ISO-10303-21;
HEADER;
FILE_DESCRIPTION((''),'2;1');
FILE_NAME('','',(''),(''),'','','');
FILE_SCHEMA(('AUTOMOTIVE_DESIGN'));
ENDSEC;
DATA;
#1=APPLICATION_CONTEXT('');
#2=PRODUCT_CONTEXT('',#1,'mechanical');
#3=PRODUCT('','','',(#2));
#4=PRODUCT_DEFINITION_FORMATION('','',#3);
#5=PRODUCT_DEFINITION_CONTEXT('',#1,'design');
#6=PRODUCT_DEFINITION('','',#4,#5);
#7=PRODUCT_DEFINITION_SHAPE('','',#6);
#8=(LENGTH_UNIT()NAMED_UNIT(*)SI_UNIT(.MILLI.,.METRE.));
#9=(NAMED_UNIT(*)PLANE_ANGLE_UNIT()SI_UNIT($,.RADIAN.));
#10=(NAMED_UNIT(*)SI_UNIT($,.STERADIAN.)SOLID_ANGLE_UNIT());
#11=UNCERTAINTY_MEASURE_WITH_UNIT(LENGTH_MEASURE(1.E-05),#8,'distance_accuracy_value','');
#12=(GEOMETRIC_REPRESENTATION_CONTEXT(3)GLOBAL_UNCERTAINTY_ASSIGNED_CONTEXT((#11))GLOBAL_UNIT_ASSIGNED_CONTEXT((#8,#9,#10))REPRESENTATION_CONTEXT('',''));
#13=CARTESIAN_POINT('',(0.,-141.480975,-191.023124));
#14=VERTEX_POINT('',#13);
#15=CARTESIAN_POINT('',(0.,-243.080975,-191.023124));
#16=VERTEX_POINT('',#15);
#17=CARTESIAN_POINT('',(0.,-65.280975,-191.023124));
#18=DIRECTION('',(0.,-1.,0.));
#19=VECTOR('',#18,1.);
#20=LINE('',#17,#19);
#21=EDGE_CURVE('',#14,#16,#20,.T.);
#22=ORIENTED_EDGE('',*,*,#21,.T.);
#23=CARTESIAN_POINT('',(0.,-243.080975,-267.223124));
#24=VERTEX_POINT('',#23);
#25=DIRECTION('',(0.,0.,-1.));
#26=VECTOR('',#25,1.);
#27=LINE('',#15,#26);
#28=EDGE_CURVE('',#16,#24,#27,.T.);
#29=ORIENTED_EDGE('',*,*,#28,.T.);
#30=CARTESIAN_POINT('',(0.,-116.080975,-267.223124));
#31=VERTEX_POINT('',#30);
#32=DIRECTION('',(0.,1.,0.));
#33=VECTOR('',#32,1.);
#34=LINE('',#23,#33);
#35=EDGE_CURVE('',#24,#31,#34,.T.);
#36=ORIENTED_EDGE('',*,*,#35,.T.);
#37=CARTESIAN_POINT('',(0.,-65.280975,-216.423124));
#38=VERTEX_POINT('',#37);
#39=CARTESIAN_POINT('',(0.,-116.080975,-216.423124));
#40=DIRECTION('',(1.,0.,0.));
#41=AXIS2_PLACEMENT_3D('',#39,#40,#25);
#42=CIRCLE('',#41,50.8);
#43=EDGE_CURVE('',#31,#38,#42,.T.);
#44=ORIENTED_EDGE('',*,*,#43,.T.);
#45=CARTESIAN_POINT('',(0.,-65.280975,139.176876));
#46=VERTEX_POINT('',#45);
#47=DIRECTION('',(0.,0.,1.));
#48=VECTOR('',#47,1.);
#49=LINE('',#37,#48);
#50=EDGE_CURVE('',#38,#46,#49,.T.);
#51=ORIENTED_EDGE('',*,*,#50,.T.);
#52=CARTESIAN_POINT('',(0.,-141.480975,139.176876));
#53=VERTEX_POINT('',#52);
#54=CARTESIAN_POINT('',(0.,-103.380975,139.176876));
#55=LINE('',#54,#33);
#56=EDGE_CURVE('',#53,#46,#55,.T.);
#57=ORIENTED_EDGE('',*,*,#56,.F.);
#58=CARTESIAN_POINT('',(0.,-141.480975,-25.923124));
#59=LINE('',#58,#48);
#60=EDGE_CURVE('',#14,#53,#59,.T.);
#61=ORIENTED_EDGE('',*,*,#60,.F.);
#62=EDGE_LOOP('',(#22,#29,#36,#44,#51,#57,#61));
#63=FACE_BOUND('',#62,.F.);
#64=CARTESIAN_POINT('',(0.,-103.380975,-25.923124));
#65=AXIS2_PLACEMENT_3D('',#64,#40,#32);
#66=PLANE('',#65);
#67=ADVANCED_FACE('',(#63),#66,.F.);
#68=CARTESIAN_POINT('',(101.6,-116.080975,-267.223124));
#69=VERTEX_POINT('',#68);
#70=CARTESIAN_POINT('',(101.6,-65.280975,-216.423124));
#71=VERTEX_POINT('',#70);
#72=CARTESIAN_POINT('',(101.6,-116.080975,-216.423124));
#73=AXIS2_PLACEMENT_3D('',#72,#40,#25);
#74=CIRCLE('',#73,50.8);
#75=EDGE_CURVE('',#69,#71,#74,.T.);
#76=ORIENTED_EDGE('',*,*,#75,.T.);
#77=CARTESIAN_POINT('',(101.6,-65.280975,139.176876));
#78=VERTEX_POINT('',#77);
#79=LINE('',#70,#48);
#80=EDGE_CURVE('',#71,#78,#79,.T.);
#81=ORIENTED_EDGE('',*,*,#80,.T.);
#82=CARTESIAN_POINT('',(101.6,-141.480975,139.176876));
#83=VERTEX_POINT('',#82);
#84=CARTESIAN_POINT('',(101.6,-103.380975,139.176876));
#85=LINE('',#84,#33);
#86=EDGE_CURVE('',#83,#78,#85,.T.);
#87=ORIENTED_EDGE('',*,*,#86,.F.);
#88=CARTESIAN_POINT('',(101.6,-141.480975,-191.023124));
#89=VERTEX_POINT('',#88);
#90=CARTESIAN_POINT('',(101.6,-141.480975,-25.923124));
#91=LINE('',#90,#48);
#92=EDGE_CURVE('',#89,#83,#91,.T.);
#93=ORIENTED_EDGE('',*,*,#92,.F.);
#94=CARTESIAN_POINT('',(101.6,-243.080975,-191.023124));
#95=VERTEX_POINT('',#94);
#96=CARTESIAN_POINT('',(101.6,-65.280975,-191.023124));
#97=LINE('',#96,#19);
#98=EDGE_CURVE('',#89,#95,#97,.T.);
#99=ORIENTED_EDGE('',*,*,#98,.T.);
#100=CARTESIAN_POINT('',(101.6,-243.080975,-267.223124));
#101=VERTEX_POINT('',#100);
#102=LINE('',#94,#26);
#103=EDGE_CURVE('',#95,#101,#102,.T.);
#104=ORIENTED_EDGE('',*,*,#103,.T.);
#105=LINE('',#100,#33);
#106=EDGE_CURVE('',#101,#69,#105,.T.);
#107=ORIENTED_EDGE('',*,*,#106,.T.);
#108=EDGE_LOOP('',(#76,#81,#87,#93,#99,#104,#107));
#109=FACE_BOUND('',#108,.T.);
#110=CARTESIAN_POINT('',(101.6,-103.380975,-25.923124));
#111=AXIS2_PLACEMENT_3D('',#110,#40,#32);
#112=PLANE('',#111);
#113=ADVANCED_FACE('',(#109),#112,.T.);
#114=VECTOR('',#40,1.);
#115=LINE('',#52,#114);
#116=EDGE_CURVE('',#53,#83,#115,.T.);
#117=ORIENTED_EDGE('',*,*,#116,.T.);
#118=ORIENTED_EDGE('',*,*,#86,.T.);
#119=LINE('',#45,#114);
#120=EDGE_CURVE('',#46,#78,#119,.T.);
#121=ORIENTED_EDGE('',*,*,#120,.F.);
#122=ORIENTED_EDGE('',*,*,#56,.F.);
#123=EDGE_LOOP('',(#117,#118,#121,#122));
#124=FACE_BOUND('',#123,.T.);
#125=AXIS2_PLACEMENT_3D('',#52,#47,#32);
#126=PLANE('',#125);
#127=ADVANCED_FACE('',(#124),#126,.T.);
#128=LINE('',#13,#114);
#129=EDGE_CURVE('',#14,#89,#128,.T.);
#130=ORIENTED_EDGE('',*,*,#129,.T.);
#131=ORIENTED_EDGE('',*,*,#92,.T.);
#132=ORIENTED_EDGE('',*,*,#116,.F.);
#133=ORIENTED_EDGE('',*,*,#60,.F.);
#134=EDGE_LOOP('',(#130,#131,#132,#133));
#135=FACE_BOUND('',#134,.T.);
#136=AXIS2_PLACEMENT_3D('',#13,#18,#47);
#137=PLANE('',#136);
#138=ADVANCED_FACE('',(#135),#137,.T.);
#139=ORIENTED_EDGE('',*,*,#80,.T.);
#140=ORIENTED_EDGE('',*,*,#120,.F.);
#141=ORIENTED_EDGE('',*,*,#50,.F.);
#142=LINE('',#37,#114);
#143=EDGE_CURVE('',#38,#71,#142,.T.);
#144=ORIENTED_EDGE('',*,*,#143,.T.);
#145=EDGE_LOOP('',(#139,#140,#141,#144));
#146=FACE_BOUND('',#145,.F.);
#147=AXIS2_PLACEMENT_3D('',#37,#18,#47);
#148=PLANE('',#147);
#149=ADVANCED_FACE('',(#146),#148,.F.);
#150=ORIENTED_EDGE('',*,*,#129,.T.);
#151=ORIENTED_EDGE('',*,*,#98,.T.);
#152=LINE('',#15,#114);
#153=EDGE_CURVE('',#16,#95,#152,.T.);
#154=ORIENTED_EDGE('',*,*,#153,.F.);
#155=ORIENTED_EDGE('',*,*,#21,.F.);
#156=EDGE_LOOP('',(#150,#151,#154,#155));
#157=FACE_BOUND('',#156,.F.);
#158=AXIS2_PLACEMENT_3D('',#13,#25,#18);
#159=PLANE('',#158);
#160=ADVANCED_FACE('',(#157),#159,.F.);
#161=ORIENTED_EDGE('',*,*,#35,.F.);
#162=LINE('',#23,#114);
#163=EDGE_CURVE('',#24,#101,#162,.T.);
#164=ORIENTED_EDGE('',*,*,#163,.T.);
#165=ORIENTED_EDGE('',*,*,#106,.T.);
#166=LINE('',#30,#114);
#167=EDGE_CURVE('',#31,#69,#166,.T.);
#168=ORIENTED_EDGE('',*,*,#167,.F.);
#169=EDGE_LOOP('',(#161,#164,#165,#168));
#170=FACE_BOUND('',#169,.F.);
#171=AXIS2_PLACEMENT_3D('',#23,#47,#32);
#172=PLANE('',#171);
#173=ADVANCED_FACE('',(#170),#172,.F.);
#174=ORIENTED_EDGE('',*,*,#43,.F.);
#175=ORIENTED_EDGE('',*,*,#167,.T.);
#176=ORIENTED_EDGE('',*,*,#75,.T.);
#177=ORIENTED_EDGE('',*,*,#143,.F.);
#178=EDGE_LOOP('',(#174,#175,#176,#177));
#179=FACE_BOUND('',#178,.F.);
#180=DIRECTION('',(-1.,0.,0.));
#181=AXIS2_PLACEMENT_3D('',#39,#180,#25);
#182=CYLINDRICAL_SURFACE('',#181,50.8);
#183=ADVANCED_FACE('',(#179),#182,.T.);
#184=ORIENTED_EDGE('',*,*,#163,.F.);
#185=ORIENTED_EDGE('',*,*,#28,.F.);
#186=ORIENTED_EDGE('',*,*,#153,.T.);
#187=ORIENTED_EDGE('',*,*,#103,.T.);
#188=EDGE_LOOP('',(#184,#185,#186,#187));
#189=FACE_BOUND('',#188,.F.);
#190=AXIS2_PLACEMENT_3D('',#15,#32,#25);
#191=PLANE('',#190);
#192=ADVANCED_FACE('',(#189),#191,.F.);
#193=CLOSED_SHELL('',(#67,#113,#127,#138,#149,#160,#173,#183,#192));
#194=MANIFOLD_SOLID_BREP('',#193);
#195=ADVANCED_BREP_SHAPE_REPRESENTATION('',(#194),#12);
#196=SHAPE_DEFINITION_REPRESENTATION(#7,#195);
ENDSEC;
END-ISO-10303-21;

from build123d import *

# Parameters (mm, degrees)
F0_W     = 76.2
F0_H     = 330.2
F1_DEPTH = 101.6


# Not quite as in the source:
# - a feature of the source that left no trace in its solid (it failed there, or was rolled back) is left out


with BuildPart() as f1:
    # F0 (on Right) → F1 (new body)
    with BuildSketch(Plane.YZ):
        with Locations((-103.380974756, -25.9231243968)):
            Rectangle(F0_W, F0_H)
        with BuildLine():
            Line((-65.280974756, -191.0231243968), (-141.480974756, -191.0231243968))
            Line((-141.480974756, -191.0231243968), (-243.080974756, -191.0231243968))
            Line((-243.080974756, -191.0231243968), (-243.080974756, -267.2231243968))
            Line((-243.080974756, -267.2231243968), (-116.080974756, -267.2231243968))
            ThreePointArc((-116.080974756, -267.2231243968), (-80.1599502717, -252.3441488811), (-65.280974756, -216.4231243968))
            Line((-65.280974756, -216.4231243968), (-65.280974756, -191.0231243968))
        make_face()
    extrude(amount=F1_DEPTH)


solid = f1.part
